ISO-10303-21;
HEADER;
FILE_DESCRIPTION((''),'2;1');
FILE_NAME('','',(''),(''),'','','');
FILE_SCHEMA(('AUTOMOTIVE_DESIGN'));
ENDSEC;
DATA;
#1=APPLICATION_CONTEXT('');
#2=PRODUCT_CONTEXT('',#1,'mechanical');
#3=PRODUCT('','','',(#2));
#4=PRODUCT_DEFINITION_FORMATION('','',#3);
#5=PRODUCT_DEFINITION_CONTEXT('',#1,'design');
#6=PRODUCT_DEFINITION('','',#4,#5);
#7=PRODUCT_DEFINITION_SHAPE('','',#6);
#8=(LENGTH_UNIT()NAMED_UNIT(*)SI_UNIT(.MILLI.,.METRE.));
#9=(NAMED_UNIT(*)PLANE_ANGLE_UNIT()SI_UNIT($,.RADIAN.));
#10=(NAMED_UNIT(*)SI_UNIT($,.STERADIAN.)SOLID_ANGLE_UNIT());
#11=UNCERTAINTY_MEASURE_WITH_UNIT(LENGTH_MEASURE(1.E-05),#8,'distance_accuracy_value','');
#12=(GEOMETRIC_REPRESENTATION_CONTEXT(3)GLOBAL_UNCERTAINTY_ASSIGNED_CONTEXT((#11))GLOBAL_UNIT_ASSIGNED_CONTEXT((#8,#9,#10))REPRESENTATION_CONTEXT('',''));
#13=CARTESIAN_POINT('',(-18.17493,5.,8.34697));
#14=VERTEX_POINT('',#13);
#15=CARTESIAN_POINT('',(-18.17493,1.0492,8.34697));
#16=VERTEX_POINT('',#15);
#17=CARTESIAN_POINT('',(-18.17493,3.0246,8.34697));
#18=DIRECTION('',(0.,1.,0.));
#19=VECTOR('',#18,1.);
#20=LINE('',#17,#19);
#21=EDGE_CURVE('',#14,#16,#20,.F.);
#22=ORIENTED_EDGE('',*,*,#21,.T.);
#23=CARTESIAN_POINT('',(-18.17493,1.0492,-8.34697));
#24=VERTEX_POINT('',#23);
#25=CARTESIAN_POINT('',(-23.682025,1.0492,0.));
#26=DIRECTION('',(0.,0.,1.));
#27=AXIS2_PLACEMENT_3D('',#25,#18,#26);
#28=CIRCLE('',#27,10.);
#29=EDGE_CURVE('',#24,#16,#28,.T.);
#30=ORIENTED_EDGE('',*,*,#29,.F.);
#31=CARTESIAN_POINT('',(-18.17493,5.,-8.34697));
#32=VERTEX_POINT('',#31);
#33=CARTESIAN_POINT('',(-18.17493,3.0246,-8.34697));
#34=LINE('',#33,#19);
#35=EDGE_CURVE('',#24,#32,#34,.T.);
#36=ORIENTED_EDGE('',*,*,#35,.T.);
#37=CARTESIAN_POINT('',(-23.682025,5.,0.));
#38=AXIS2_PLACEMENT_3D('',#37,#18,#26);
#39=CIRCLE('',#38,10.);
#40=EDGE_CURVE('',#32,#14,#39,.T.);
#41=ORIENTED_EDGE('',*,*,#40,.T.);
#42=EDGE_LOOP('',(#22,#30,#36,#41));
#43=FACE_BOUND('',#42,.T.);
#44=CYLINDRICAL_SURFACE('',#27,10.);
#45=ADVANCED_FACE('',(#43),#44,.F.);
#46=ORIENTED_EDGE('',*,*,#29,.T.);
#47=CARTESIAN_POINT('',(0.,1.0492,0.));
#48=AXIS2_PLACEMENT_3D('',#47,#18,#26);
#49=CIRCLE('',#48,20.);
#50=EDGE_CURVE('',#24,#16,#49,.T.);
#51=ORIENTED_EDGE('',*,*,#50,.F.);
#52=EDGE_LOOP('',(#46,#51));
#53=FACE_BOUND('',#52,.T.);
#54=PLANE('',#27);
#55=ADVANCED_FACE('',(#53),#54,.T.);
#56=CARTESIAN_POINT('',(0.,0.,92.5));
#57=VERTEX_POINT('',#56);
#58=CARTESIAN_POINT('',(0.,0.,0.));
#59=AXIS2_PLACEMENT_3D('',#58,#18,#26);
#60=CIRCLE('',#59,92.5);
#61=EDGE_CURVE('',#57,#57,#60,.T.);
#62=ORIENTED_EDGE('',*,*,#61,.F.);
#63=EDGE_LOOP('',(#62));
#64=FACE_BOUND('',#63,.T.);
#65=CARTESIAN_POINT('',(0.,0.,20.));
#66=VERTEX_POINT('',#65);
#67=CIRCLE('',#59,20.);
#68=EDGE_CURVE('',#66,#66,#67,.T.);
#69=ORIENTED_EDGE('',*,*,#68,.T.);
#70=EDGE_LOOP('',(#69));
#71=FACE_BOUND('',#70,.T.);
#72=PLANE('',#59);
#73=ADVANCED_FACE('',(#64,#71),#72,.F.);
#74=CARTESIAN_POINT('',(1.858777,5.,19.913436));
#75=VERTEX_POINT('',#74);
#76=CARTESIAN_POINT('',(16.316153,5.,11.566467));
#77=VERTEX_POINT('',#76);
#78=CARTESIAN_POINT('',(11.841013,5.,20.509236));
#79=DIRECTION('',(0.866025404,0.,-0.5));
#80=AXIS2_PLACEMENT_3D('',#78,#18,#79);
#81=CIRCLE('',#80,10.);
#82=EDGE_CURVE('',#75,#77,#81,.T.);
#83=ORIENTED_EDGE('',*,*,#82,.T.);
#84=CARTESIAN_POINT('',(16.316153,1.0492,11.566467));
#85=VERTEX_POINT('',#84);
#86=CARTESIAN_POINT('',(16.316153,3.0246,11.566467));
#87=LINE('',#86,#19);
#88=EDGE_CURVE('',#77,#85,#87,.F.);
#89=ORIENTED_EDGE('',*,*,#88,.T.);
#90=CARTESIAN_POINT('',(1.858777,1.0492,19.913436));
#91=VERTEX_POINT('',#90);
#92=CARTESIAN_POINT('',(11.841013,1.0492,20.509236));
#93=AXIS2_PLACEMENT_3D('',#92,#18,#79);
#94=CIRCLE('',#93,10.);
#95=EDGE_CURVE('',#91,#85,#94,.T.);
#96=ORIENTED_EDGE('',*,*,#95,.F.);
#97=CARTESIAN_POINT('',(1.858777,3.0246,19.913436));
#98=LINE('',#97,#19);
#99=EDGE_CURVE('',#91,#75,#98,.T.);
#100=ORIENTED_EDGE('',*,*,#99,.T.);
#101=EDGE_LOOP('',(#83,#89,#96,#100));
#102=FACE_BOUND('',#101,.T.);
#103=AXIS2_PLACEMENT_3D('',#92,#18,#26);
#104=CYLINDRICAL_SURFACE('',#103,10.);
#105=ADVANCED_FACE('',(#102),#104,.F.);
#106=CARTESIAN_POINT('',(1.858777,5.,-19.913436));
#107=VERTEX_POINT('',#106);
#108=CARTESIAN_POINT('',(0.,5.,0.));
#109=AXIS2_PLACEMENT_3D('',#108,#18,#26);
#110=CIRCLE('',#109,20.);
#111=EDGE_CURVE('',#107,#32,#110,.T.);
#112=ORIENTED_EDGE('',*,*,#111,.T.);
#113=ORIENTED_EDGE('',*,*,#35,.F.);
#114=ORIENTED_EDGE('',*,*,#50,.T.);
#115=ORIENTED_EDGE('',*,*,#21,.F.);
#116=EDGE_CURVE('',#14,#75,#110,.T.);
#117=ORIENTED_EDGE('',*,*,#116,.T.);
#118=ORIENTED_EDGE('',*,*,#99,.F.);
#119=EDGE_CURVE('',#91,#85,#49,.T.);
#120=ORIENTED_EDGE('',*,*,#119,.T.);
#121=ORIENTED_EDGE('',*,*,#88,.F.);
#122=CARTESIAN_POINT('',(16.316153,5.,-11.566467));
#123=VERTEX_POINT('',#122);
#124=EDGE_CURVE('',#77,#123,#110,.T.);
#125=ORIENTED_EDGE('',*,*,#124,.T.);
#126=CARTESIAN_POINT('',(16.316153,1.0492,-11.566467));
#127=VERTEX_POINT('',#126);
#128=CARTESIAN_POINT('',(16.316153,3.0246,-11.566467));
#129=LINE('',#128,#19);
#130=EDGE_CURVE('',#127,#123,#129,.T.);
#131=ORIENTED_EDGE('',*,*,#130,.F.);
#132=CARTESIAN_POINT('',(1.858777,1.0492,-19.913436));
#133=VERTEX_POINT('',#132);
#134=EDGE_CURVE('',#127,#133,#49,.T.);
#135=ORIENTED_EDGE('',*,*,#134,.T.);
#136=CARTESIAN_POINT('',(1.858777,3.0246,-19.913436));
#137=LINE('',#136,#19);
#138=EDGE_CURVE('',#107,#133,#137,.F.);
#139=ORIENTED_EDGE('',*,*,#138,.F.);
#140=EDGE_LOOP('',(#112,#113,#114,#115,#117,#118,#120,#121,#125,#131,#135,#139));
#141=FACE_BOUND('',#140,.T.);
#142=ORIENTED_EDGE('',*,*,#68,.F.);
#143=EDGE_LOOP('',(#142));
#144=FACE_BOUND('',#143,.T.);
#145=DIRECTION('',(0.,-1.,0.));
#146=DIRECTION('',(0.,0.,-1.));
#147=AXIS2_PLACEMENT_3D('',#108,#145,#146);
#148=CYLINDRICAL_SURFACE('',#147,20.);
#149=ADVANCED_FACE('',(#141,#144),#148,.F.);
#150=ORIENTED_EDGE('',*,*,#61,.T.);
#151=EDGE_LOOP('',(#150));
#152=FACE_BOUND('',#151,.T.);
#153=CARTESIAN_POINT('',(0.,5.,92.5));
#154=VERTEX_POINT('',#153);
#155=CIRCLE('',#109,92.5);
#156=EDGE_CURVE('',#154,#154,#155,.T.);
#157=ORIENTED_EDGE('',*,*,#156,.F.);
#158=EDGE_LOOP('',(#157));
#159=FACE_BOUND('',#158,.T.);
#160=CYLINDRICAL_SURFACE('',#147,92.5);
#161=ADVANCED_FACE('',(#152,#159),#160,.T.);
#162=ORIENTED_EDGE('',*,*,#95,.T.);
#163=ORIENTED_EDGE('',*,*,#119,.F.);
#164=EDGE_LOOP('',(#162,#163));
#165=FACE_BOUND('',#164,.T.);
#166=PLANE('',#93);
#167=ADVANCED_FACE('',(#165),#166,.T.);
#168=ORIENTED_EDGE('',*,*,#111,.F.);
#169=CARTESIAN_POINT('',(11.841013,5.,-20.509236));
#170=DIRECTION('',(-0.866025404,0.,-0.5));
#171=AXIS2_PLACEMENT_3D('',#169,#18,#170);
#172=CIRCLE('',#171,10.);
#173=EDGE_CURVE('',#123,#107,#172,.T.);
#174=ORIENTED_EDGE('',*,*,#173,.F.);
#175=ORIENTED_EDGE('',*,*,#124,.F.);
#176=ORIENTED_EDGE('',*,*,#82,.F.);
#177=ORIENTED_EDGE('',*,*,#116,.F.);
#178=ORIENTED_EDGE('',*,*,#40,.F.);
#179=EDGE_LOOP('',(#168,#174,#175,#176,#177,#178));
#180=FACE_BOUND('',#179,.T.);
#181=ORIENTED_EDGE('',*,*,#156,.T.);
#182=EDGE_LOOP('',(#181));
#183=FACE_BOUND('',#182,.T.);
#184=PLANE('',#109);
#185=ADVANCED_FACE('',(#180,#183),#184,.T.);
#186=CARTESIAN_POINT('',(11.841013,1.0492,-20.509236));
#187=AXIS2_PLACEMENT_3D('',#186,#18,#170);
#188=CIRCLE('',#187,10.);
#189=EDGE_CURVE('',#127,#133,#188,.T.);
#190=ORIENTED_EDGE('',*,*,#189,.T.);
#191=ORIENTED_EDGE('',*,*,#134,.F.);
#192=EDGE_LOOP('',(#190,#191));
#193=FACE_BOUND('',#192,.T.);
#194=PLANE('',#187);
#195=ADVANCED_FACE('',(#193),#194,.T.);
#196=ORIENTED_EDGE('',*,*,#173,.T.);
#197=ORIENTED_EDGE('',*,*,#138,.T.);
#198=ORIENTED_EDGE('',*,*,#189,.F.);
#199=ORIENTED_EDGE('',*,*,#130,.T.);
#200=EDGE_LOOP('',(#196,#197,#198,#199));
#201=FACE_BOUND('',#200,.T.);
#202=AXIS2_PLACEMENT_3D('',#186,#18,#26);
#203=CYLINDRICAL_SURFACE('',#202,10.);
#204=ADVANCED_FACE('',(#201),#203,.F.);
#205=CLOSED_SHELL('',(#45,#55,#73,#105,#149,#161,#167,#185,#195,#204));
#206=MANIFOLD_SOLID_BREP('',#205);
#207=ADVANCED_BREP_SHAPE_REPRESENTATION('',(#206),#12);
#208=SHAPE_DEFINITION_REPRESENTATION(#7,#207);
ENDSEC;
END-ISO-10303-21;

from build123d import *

# Parameters (mm, degrees)
SKETCH1_R           = 92.5
BOSS_EXTRUDE1_DEPTH = 5
SKETCH2_R           = 20
CUT_EXTRUDE1_DEPTH  = 131.910274616
SKETCH3_R           = 10
CUT_EXTRUDE2_DEPTH  = 3.950799967
CIRPATTERN1_COUNT   = 3


with BuildPart() as part:
    # Sketch1 → Boss-Extrude1 (new body)
    with BuildSketch(Plane(origin=(0, 0, 0), x_dir=(1, 0, 0), z_dir=(0, 1, 0))):
        Circle(SKETCH1_R)
    extrude(amount=BOSS_EXTRUDE1_DEPTH)

    # Sketch2 → Cut-Extrude1 (cut, through all)
    with BuildSketch(Plane(origin=(0, 0, 0), x_dir=(1, 0, 0), z_dir=(0, 1, 0))):
        Circle(SKETCH2_R)
    extrude(amount=CUT_EXTRUDE1_DEPTH, mode=Mode.SUBTRACT)

    # Sketch3 → Cut-Extrude2 (cut)
    with BuildSketch(Plane(origin=(0, 5, 0), x_dir=(1, 0, 0), z_dir=(0, 1, 0))):
        with Locations((-23.682025435, 0)):
            Circle(SKETCH3_R)
    cut_extrude2 = extrude(amount=-CUT_EXTRUDE2_DEPTH, mode=Mode.SUBTRACT)

    # CirPattern1: Cut-Extrude2 ×3 about axis
    cirpattern1_axis = Axis((0, 0, 0), (0, 1, 0))
    for i in range(1, CIRPATTERN1_COUNT):
        add(cut_extrude2.rotate(cirpattern1_axis, i * 360 / CIRPATTERN1_COUNT), mode=Mode.SUBTRACT)


solid = part.part
